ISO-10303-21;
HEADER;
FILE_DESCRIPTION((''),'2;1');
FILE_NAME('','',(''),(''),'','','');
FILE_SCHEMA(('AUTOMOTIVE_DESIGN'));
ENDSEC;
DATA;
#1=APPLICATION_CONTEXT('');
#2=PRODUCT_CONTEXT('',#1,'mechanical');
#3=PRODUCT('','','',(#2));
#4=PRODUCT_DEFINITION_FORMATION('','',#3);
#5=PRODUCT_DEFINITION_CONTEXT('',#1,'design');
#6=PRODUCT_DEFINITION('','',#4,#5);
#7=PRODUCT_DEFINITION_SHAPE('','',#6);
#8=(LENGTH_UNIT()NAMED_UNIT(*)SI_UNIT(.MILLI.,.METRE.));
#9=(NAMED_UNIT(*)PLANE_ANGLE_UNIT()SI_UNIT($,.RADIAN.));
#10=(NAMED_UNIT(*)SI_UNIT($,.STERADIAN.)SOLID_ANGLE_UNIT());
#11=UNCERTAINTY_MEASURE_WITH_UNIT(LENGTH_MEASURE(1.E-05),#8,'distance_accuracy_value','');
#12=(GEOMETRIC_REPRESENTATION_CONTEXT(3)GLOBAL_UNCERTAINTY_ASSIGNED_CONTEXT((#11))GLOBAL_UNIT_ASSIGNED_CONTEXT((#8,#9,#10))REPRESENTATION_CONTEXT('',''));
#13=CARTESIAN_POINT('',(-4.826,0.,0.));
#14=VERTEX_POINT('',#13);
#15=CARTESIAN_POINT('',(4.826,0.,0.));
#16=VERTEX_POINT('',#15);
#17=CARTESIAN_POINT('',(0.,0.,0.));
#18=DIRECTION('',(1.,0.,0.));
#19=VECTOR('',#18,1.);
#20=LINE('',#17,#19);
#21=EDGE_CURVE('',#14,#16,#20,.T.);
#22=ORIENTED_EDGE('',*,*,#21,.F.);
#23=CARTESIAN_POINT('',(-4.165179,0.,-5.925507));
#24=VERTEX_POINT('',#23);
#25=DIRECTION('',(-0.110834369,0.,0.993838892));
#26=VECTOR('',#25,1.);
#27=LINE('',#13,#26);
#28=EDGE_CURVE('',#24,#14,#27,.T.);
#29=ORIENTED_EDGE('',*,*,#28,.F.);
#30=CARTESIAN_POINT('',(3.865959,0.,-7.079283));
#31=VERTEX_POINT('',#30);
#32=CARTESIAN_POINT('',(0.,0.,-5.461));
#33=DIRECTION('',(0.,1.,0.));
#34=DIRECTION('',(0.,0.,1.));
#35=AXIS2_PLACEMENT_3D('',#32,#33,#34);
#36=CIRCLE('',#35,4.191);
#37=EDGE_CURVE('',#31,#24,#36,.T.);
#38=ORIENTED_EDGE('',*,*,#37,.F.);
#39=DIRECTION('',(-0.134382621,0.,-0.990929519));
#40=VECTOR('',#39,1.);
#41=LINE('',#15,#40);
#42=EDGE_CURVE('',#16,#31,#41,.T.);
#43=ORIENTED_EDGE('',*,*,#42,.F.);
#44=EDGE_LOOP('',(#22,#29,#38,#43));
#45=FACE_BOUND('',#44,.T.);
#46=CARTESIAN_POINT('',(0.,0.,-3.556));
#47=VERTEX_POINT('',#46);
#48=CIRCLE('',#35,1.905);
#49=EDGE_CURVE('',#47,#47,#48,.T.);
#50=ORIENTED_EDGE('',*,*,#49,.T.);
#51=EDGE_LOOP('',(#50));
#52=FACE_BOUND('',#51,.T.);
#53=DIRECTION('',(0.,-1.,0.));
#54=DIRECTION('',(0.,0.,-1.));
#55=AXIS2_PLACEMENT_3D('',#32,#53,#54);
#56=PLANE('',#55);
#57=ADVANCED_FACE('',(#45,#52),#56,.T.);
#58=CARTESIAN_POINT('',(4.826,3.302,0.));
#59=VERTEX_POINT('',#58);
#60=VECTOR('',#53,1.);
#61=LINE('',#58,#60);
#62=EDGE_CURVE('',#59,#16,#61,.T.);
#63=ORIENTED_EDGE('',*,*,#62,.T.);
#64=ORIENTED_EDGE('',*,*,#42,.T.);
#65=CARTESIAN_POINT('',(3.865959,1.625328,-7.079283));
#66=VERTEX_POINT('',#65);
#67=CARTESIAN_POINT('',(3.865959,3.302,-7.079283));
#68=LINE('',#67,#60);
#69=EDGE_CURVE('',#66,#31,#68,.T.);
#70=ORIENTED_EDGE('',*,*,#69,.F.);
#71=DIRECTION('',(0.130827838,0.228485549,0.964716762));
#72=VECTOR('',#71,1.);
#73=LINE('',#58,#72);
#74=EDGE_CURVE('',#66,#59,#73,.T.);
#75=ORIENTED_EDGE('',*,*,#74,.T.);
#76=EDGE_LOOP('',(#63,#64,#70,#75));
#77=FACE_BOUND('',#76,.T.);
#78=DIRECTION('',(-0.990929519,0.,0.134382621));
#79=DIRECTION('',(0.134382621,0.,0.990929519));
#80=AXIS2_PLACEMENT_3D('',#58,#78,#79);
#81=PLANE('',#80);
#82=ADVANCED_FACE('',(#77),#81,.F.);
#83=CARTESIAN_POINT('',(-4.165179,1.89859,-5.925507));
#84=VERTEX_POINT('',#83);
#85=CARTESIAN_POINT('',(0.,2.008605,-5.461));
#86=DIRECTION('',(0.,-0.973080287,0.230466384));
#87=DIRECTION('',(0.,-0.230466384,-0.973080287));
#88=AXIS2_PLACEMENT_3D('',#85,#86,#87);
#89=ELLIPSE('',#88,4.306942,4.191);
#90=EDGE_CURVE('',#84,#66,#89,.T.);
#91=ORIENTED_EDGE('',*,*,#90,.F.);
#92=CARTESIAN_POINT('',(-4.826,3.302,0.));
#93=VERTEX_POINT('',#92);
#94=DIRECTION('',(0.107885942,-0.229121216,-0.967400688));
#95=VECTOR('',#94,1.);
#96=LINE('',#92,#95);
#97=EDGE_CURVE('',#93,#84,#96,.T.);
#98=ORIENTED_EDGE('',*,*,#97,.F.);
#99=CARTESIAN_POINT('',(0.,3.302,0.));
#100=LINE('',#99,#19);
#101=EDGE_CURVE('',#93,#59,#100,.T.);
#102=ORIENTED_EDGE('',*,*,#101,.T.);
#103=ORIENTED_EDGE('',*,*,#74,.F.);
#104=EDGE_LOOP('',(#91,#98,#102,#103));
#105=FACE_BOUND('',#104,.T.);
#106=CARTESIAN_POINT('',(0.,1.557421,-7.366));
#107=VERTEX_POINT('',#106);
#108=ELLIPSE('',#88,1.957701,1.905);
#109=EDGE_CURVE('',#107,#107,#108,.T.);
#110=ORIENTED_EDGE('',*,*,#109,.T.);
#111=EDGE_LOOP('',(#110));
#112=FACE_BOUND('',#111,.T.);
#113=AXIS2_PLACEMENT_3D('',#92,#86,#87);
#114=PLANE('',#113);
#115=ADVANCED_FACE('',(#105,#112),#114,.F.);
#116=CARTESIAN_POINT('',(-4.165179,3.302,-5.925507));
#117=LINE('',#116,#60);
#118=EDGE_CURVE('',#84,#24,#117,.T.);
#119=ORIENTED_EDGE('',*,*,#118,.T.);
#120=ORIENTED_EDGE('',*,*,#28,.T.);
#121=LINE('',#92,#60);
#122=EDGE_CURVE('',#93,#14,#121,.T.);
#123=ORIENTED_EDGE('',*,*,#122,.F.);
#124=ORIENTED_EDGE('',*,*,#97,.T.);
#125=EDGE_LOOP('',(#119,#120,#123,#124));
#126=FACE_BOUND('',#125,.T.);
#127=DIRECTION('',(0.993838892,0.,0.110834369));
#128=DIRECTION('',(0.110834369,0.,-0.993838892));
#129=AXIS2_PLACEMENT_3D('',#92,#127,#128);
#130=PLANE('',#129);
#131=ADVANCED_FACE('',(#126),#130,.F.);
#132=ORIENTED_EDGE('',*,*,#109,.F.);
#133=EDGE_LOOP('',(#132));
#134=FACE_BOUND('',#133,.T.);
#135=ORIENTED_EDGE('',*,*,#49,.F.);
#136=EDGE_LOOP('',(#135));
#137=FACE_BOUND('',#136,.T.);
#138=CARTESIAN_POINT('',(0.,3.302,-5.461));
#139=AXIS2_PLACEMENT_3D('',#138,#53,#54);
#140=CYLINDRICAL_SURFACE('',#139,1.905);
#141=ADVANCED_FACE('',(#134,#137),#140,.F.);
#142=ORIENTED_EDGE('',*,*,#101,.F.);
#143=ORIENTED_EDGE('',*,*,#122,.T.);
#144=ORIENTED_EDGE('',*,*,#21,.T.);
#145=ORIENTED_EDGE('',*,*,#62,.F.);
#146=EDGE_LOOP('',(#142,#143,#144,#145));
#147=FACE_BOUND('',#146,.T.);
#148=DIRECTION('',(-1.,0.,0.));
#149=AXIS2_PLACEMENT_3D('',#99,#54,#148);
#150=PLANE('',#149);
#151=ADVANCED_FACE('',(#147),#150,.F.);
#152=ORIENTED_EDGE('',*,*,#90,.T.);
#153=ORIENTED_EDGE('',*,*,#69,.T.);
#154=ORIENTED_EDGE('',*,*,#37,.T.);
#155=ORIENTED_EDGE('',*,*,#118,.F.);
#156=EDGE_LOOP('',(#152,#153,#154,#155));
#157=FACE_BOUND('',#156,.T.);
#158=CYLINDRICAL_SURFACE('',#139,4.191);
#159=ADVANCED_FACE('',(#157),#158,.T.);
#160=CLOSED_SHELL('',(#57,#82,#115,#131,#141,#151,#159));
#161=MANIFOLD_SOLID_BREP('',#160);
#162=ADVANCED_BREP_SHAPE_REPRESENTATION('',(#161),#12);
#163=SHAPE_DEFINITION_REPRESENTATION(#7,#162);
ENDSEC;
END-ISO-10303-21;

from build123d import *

# Parameters (mm, degrees)
SKETCH1_R               = 1.905
BOSS_EXTRUDE3_DEPTH     = 3.302
BOUNDARY_CUT1_START     = 3.213111109
BOUNDARY_CUT1_OUTLINE_W = 12
BOUNDARY_CUT1_OUTLINE_H = 13
BOUNDARY_CUT1_DEPTH     = 2.224461537


# Read off the part's stored shape, not the designer's step: Boundary-Cut1
with BuildPart() as part:
    # Sketch1 → Boss-Extrude3 (new body)
    with BuildSketch(Plane(origin=(0, 0, 0), x_dir=(1, 0, 0), z_dir=(0, 1, 0))):
        with BuildLine():
            Line((0, 0), (-4.826, 0))
            Line((-4.826, 0), (-4.165178795, 5.925506842))
            ThreePointArc((-4.165178795, 5.925506842), (-2.7944349, 8.584397923), (0, 9.652))
            ThreePointArc((0, 9.652), (2.321880516, 8.950033085), (3.865959408, 7.079282688))
            Line((3.865959408, 7.079282688), (4.826, 0))
            Line((4.826, 0), (0, 0))
        make_face()
        with Locations(Location((0, 5.461, 0), (0, 0, 90))):
            Circle(SKETCH1_R, mode=Mode.SUBTRACT)
    extrude(amount=BOSS_EXTRUDE3_DEPTH)

    # Boundary-Cut1 outline → Boundary-Cut1 (cut)
    with BuildSketch(Plane(origin=(0, 0, 0), x_dir=(1, 0, 0), z_dir=(0, 0.9730802874900094, -0.23046638387921312)).offset(BOUNDARY_CUT1_START)):
        with Locations((0, 4.5)):
            Rectangle(BOUNDARY_CUT1_OUTLINE_W, BOUNDARY_CUT1_OUTLINE_H)
    extrude(amount=BOUNDARY_CUT1_DEPTH, mode=Mode.SUBTRACT)


solid = part.part
